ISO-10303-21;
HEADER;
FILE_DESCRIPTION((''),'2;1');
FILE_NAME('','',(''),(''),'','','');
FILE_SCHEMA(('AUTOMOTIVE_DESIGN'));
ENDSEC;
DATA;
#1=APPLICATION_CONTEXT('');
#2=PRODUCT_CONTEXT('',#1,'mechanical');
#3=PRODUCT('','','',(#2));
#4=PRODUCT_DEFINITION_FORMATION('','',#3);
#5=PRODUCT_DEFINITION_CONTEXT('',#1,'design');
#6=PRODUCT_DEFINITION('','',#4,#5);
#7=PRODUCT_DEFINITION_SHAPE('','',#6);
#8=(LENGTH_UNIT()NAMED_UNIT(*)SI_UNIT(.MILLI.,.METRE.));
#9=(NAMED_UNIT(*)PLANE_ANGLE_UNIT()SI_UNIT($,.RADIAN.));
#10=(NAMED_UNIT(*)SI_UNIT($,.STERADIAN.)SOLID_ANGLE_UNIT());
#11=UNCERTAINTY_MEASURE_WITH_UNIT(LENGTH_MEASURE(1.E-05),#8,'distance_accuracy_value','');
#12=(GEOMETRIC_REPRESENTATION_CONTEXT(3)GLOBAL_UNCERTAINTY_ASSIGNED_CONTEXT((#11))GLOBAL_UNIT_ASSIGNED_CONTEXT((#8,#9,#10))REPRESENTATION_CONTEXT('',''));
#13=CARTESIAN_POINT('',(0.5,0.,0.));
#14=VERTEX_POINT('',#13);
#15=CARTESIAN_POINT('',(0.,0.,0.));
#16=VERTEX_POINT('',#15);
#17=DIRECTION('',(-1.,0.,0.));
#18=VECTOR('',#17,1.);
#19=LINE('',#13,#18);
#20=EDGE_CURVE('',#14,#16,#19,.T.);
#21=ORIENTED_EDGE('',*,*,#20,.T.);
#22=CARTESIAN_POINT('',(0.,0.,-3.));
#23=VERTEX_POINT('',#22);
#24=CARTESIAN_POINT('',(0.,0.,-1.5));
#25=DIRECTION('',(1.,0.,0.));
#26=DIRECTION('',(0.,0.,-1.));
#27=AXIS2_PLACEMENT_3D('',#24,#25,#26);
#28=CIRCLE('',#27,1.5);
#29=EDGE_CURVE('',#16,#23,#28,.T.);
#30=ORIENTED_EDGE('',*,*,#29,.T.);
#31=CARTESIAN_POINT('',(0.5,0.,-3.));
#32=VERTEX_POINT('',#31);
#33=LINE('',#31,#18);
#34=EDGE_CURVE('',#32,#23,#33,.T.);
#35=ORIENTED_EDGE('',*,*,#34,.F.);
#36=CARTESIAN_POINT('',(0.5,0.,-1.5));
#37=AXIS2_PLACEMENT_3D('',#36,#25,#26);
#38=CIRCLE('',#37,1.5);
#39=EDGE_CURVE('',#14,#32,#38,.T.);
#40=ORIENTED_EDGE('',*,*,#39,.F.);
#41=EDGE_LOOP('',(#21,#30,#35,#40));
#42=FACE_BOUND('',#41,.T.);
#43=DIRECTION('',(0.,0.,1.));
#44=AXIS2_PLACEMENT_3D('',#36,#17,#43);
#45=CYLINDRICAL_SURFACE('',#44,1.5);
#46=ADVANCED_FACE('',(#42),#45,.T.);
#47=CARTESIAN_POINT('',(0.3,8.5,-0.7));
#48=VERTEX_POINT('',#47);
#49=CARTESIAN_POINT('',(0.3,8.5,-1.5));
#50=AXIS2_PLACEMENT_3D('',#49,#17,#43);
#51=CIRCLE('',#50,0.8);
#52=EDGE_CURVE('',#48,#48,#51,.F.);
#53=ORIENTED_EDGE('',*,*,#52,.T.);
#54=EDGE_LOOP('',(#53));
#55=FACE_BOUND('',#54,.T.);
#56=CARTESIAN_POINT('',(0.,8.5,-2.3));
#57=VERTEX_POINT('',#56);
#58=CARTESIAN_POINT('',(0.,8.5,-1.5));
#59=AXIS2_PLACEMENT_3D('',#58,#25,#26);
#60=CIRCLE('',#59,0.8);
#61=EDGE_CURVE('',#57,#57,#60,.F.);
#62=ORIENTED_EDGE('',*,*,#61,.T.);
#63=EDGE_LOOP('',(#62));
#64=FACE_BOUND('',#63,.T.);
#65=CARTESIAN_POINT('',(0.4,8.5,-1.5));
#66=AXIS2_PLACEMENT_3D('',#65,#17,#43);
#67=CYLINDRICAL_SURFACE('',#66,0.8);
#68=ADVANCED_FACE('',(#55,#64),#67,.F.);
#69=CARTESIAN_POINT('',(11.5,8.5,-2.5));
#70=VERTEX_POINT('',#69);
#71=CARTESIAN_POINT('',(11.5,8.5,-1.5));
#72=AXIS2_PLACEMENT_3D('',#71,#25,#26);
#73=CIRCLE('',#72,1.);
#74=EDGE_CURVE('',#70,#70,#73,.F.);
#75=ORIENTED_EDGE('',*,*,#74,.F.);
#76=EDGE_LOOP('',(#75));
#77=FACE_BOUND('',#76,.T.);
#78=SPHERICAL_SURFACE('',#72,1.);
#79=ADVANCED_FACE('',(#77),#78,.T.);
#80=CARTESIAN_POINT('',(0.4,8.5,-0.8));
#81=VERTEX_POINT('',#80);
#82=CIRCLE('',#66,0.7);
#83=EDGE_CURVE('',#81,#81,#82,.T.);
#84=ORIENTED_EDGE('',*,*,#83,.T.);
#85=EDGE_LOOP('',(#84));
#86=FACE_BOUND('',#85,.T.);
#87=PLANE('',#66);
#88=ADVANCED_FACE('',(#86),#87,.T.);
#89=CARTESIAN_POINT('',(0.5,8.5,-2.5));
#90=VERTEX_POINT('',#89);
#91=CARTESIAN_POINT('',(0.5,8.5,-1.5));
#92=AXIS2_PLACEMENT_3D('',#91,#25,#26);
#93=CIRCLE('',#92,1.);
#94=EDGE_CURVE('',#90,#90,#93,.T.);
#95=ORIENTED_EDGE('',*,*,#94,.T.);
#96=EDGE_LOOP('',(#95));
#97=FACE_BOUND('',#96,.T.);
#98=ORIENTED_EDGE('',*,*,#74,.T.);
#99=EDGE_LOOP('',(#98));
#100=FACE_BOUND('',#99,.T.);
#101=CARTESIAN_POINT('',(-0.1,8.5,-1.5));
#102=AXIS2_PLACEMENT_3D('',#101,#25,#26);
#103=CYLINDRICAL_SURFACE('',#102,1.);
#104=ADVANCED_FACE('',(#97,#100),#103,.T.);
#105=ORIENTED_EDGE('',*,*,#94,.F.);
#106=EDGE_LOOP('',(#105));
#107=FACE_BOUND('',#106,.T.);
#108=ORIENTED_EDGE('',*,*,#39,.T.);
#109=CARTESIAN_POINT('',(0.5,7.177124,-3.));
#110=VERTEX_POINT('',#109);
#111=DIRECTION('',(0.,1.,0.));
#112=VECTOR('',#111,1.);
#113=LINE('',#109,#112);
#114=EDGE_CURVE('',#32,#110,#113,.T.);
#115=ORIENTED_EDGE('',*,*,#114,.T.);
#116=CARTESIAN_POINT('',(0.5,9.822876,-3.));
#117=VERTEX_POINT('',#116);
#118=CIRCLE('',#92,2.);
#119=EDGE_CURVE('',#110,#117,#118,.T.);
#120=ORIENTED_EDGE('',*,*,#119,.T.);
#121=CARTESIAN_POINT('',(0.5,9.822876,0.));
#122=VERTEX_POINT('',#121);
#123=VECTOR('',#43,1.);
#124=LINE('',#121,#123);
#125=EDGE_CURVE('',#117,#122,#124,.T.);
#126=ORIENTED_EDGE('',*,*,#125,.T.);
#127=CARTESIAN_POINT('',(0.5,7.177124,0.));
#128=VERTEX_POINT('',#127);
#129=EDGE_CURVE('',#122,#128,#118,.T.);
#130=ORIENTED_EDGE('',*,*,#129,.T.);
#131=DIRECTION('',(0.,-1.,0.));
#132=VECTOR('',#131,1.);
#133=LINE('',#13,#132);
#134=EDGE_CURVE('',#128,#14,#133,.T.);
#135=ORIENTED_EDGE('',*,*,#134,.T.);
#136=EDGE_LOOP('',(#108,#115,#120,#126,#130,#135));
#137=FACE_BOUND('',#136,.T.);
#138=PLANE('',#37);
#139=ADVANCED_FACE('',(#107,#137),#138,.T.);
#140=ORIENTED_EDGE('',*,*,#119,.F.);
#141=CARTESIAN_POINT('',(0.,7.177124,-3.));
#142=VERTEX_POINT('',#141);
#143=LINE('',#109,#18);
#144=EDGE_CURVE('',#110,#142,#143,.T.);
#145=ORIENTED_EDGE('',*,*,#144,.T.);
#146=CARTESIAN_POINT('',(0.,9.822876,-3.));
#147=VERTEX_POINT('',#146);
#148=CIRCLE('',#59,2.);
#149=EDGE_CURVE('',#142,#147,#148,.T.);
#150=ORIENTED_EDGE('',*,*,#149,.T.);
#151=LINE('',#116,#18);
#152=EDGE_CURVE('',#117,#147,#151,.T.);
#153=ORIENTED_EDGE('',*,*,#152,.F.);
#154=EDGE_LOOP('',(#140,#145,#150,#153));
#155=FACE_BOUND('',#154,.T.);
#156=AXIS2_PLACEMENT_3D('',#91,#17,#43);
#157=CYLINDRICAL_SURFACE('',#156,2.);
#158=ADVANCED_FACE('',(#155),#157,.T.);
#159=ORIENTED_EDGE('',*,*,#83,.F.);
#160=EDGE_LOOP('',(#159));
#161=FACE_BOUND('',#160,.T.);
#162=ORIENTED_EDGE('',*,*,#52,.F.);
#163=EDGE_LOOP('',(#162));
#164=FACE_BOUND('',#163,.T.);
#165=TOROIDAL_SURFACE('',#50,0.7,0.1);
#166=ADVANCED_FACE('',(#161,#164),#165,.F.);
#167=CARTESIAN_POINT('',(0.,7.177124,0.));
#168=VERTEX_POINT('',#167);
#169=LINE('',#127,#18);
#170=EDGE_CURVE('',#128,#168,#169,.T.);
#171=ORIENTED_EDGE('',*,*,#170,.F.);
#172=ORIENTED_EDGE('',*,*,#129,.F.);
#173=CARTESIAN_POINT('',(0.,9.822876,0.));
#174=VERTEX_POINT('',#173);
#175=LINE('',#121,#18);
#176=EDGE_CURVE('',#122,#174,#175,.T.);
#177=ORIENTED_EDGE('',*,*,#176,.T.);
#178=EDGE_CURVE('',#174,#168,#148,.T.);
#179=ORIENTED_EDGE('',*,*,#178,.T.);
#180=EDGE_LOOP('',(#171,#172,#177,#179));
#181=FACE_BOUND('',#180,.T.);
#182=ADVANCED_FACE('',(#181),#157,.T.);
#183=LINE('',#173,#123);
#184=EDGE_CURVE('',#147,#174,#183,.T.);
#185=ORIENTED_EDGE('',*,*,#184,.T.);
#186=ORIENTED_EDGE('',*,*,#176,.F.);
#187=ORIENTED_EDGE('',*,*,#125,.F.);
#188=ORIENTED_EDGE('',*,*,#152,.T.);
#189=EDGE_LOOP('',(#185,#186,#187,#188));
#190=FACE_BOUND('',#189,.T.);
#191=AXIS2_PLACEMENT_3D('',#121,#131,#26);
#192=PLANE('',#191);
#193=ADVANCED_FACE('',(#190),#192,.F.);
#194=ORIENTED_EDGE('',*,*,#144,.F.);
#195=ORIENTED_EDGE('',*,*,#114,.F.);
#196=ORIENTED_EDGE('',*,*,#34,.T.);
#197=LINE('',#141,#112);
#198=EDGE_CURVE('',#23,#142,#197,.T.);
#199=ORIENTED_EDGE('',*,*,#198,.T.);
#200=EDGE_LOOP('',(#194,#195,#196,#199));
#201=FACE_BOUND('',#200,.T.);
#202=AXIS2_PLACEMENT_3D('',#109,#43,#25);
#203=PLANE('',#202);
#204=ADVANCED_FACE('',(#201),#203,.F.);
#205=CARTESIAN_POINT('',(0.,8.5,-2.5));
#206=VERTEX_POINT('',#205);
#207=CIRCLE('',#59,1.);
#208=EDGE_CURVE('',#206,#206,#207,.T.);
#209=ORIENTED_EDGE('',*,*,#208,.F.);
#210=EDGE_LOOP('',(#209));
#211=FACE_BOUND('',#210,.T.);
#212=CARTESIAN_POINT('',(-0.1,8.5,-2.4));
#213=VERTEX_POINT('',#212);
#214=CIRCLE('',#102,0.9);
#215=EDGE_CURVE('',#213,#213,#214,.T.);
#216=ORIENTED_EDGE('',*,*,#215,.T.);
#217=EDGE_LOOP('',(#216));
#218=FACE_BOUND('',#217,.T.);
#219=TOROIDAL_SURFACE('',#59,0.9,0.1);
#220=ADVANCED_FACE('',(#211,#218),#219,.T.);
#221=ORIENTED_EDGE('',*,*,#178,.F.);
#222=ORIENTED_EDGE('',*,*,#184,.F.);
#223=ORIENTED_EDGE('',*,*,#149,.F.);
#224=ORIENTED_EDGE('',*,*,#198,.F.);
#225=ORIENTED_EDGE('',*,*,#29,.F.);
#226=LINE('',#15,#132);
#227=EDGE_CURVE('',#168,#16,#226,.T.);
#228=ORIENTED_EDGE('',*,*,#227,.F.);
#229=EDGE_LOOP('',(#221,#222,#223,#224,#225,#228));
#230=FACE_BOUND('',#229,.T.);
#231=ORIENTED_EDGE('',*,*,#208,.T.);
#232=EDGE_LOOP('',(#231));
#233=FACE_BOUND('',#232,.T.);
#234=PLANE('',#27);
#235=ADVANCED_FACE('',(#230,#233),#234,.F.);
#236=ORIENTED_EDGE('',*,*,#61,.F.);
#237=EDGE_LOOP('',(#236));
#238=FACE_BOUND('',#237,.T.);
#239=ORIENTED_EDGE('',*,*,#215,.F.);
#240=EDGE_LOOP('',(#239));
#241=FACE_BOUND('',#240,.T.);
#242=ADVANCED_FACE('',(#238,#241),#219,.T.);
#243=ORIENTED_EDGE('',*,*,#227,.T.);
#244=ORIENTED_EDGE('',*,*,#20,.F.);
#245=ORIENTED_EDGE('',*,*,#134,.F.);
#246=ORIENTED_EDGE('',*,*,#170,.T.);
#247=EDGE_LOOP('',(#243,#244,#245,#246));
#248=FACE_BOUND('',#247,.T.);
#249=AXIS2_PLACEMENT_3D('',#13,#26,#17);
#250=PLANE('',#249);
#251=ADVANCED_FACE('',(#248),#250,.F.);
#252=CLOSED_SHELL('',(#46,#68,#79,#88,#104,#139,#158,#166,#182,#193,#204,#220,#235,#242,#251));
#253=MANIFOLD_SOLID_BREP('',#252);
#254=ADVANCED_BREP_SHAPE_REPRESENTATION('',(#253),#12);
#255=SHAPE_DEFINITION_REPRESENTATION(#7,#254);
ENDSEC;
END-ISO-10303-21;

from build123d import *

# Parameters (mm, degrees)
BOSS_EXTRUDE1_DEPTH      = 0.5
BOSS_EXTRUDE2_DEPTH      = 12
BOSS_EXTRUDE2_DEPTH_BACK = 0.6
SKETCH2_R                = 1
FILLET1_R                = 1
SKETCH3_R                = 0.8
CUT_EXTRUDE1_DEPTH       = 0.5
FILLET2_R                = 0.1


with BuildPart() as part:
    # Sketch1 → Boss-Extrude1 (new body)
    with BuildSketch(Plane(origin=(0, 0, 0), x_dir=(0, 0, -1), z_dir=(1, 0, 0))):
        with BuildLine():
            Line((0, 0), (0, 7.177124344))
            ThreePointArc((0, 7.177124344), (-0.5, 8.5), (0, 9.822875656))
            Line((0, 9.822875656), (3, 9.822875656))
            ThreePointArc((3, 9.822875656), (3.5, 8.5), (3, 7.177124344))
            Line((3, 7.177124344), (3, 0))
            ThreePointArc((3, 0), (1.5, -1.5), (0, 0))
        make_face()
    extrude(amount=BOSS_EXTRUDE1_DEPTH)

    # Sketch2 → Boss-Extrude2 (add, two sides: drawn at the far end of the back side and taken through both)
    with BuildSketch(Plane(origin=(0.5, 0, 0), x_dir=(0, 0, -1), z_dir=(1, 0, 0)).offset(-BOSS_EXTRUDE2_DEPTH_BACK)):
        with Locations((1.5, 8.5)):
            Circle(SKETCH2_R)
    extrude(amount=BOSS_EXTRUDE2_DEPTH + BOSS_EXTRUDE2_DEPTH_BACK)

    # Fillet1
    fillet1_edges = [part.edges().sort_by_distance(p)[0] for p in [
        (12.5, 8.5, -0.5),
    ]]
    fillet(fillet1_edges, radius=FILLET1_R)

    # Sketch3 → Cut-Extrude1 (cut)
    with BuildSketch(Plane.ZY.offset(0.1)):
        with Locations((-1.5, 8.5)):
            Circle(SKETCH3_R)
    extrude(amount=-CUT_EXTRUDE1_DEPTH, mode=Mode.SUBTRACT)

    # Fillet2
    fillet2_edges = [part.edges().sort_by_distance(p)[0] for p in [
        (-0.1, 8.5, -0.5),
        (0.4, 8.5, -2.3),
        (-0.1, 8.5, -2.3),
    ]]
    fillet(fillet2_edges, radius=FILLET2_R - 0.0001)  # a hair under: the kernel refuses the full size


solid = part.part
